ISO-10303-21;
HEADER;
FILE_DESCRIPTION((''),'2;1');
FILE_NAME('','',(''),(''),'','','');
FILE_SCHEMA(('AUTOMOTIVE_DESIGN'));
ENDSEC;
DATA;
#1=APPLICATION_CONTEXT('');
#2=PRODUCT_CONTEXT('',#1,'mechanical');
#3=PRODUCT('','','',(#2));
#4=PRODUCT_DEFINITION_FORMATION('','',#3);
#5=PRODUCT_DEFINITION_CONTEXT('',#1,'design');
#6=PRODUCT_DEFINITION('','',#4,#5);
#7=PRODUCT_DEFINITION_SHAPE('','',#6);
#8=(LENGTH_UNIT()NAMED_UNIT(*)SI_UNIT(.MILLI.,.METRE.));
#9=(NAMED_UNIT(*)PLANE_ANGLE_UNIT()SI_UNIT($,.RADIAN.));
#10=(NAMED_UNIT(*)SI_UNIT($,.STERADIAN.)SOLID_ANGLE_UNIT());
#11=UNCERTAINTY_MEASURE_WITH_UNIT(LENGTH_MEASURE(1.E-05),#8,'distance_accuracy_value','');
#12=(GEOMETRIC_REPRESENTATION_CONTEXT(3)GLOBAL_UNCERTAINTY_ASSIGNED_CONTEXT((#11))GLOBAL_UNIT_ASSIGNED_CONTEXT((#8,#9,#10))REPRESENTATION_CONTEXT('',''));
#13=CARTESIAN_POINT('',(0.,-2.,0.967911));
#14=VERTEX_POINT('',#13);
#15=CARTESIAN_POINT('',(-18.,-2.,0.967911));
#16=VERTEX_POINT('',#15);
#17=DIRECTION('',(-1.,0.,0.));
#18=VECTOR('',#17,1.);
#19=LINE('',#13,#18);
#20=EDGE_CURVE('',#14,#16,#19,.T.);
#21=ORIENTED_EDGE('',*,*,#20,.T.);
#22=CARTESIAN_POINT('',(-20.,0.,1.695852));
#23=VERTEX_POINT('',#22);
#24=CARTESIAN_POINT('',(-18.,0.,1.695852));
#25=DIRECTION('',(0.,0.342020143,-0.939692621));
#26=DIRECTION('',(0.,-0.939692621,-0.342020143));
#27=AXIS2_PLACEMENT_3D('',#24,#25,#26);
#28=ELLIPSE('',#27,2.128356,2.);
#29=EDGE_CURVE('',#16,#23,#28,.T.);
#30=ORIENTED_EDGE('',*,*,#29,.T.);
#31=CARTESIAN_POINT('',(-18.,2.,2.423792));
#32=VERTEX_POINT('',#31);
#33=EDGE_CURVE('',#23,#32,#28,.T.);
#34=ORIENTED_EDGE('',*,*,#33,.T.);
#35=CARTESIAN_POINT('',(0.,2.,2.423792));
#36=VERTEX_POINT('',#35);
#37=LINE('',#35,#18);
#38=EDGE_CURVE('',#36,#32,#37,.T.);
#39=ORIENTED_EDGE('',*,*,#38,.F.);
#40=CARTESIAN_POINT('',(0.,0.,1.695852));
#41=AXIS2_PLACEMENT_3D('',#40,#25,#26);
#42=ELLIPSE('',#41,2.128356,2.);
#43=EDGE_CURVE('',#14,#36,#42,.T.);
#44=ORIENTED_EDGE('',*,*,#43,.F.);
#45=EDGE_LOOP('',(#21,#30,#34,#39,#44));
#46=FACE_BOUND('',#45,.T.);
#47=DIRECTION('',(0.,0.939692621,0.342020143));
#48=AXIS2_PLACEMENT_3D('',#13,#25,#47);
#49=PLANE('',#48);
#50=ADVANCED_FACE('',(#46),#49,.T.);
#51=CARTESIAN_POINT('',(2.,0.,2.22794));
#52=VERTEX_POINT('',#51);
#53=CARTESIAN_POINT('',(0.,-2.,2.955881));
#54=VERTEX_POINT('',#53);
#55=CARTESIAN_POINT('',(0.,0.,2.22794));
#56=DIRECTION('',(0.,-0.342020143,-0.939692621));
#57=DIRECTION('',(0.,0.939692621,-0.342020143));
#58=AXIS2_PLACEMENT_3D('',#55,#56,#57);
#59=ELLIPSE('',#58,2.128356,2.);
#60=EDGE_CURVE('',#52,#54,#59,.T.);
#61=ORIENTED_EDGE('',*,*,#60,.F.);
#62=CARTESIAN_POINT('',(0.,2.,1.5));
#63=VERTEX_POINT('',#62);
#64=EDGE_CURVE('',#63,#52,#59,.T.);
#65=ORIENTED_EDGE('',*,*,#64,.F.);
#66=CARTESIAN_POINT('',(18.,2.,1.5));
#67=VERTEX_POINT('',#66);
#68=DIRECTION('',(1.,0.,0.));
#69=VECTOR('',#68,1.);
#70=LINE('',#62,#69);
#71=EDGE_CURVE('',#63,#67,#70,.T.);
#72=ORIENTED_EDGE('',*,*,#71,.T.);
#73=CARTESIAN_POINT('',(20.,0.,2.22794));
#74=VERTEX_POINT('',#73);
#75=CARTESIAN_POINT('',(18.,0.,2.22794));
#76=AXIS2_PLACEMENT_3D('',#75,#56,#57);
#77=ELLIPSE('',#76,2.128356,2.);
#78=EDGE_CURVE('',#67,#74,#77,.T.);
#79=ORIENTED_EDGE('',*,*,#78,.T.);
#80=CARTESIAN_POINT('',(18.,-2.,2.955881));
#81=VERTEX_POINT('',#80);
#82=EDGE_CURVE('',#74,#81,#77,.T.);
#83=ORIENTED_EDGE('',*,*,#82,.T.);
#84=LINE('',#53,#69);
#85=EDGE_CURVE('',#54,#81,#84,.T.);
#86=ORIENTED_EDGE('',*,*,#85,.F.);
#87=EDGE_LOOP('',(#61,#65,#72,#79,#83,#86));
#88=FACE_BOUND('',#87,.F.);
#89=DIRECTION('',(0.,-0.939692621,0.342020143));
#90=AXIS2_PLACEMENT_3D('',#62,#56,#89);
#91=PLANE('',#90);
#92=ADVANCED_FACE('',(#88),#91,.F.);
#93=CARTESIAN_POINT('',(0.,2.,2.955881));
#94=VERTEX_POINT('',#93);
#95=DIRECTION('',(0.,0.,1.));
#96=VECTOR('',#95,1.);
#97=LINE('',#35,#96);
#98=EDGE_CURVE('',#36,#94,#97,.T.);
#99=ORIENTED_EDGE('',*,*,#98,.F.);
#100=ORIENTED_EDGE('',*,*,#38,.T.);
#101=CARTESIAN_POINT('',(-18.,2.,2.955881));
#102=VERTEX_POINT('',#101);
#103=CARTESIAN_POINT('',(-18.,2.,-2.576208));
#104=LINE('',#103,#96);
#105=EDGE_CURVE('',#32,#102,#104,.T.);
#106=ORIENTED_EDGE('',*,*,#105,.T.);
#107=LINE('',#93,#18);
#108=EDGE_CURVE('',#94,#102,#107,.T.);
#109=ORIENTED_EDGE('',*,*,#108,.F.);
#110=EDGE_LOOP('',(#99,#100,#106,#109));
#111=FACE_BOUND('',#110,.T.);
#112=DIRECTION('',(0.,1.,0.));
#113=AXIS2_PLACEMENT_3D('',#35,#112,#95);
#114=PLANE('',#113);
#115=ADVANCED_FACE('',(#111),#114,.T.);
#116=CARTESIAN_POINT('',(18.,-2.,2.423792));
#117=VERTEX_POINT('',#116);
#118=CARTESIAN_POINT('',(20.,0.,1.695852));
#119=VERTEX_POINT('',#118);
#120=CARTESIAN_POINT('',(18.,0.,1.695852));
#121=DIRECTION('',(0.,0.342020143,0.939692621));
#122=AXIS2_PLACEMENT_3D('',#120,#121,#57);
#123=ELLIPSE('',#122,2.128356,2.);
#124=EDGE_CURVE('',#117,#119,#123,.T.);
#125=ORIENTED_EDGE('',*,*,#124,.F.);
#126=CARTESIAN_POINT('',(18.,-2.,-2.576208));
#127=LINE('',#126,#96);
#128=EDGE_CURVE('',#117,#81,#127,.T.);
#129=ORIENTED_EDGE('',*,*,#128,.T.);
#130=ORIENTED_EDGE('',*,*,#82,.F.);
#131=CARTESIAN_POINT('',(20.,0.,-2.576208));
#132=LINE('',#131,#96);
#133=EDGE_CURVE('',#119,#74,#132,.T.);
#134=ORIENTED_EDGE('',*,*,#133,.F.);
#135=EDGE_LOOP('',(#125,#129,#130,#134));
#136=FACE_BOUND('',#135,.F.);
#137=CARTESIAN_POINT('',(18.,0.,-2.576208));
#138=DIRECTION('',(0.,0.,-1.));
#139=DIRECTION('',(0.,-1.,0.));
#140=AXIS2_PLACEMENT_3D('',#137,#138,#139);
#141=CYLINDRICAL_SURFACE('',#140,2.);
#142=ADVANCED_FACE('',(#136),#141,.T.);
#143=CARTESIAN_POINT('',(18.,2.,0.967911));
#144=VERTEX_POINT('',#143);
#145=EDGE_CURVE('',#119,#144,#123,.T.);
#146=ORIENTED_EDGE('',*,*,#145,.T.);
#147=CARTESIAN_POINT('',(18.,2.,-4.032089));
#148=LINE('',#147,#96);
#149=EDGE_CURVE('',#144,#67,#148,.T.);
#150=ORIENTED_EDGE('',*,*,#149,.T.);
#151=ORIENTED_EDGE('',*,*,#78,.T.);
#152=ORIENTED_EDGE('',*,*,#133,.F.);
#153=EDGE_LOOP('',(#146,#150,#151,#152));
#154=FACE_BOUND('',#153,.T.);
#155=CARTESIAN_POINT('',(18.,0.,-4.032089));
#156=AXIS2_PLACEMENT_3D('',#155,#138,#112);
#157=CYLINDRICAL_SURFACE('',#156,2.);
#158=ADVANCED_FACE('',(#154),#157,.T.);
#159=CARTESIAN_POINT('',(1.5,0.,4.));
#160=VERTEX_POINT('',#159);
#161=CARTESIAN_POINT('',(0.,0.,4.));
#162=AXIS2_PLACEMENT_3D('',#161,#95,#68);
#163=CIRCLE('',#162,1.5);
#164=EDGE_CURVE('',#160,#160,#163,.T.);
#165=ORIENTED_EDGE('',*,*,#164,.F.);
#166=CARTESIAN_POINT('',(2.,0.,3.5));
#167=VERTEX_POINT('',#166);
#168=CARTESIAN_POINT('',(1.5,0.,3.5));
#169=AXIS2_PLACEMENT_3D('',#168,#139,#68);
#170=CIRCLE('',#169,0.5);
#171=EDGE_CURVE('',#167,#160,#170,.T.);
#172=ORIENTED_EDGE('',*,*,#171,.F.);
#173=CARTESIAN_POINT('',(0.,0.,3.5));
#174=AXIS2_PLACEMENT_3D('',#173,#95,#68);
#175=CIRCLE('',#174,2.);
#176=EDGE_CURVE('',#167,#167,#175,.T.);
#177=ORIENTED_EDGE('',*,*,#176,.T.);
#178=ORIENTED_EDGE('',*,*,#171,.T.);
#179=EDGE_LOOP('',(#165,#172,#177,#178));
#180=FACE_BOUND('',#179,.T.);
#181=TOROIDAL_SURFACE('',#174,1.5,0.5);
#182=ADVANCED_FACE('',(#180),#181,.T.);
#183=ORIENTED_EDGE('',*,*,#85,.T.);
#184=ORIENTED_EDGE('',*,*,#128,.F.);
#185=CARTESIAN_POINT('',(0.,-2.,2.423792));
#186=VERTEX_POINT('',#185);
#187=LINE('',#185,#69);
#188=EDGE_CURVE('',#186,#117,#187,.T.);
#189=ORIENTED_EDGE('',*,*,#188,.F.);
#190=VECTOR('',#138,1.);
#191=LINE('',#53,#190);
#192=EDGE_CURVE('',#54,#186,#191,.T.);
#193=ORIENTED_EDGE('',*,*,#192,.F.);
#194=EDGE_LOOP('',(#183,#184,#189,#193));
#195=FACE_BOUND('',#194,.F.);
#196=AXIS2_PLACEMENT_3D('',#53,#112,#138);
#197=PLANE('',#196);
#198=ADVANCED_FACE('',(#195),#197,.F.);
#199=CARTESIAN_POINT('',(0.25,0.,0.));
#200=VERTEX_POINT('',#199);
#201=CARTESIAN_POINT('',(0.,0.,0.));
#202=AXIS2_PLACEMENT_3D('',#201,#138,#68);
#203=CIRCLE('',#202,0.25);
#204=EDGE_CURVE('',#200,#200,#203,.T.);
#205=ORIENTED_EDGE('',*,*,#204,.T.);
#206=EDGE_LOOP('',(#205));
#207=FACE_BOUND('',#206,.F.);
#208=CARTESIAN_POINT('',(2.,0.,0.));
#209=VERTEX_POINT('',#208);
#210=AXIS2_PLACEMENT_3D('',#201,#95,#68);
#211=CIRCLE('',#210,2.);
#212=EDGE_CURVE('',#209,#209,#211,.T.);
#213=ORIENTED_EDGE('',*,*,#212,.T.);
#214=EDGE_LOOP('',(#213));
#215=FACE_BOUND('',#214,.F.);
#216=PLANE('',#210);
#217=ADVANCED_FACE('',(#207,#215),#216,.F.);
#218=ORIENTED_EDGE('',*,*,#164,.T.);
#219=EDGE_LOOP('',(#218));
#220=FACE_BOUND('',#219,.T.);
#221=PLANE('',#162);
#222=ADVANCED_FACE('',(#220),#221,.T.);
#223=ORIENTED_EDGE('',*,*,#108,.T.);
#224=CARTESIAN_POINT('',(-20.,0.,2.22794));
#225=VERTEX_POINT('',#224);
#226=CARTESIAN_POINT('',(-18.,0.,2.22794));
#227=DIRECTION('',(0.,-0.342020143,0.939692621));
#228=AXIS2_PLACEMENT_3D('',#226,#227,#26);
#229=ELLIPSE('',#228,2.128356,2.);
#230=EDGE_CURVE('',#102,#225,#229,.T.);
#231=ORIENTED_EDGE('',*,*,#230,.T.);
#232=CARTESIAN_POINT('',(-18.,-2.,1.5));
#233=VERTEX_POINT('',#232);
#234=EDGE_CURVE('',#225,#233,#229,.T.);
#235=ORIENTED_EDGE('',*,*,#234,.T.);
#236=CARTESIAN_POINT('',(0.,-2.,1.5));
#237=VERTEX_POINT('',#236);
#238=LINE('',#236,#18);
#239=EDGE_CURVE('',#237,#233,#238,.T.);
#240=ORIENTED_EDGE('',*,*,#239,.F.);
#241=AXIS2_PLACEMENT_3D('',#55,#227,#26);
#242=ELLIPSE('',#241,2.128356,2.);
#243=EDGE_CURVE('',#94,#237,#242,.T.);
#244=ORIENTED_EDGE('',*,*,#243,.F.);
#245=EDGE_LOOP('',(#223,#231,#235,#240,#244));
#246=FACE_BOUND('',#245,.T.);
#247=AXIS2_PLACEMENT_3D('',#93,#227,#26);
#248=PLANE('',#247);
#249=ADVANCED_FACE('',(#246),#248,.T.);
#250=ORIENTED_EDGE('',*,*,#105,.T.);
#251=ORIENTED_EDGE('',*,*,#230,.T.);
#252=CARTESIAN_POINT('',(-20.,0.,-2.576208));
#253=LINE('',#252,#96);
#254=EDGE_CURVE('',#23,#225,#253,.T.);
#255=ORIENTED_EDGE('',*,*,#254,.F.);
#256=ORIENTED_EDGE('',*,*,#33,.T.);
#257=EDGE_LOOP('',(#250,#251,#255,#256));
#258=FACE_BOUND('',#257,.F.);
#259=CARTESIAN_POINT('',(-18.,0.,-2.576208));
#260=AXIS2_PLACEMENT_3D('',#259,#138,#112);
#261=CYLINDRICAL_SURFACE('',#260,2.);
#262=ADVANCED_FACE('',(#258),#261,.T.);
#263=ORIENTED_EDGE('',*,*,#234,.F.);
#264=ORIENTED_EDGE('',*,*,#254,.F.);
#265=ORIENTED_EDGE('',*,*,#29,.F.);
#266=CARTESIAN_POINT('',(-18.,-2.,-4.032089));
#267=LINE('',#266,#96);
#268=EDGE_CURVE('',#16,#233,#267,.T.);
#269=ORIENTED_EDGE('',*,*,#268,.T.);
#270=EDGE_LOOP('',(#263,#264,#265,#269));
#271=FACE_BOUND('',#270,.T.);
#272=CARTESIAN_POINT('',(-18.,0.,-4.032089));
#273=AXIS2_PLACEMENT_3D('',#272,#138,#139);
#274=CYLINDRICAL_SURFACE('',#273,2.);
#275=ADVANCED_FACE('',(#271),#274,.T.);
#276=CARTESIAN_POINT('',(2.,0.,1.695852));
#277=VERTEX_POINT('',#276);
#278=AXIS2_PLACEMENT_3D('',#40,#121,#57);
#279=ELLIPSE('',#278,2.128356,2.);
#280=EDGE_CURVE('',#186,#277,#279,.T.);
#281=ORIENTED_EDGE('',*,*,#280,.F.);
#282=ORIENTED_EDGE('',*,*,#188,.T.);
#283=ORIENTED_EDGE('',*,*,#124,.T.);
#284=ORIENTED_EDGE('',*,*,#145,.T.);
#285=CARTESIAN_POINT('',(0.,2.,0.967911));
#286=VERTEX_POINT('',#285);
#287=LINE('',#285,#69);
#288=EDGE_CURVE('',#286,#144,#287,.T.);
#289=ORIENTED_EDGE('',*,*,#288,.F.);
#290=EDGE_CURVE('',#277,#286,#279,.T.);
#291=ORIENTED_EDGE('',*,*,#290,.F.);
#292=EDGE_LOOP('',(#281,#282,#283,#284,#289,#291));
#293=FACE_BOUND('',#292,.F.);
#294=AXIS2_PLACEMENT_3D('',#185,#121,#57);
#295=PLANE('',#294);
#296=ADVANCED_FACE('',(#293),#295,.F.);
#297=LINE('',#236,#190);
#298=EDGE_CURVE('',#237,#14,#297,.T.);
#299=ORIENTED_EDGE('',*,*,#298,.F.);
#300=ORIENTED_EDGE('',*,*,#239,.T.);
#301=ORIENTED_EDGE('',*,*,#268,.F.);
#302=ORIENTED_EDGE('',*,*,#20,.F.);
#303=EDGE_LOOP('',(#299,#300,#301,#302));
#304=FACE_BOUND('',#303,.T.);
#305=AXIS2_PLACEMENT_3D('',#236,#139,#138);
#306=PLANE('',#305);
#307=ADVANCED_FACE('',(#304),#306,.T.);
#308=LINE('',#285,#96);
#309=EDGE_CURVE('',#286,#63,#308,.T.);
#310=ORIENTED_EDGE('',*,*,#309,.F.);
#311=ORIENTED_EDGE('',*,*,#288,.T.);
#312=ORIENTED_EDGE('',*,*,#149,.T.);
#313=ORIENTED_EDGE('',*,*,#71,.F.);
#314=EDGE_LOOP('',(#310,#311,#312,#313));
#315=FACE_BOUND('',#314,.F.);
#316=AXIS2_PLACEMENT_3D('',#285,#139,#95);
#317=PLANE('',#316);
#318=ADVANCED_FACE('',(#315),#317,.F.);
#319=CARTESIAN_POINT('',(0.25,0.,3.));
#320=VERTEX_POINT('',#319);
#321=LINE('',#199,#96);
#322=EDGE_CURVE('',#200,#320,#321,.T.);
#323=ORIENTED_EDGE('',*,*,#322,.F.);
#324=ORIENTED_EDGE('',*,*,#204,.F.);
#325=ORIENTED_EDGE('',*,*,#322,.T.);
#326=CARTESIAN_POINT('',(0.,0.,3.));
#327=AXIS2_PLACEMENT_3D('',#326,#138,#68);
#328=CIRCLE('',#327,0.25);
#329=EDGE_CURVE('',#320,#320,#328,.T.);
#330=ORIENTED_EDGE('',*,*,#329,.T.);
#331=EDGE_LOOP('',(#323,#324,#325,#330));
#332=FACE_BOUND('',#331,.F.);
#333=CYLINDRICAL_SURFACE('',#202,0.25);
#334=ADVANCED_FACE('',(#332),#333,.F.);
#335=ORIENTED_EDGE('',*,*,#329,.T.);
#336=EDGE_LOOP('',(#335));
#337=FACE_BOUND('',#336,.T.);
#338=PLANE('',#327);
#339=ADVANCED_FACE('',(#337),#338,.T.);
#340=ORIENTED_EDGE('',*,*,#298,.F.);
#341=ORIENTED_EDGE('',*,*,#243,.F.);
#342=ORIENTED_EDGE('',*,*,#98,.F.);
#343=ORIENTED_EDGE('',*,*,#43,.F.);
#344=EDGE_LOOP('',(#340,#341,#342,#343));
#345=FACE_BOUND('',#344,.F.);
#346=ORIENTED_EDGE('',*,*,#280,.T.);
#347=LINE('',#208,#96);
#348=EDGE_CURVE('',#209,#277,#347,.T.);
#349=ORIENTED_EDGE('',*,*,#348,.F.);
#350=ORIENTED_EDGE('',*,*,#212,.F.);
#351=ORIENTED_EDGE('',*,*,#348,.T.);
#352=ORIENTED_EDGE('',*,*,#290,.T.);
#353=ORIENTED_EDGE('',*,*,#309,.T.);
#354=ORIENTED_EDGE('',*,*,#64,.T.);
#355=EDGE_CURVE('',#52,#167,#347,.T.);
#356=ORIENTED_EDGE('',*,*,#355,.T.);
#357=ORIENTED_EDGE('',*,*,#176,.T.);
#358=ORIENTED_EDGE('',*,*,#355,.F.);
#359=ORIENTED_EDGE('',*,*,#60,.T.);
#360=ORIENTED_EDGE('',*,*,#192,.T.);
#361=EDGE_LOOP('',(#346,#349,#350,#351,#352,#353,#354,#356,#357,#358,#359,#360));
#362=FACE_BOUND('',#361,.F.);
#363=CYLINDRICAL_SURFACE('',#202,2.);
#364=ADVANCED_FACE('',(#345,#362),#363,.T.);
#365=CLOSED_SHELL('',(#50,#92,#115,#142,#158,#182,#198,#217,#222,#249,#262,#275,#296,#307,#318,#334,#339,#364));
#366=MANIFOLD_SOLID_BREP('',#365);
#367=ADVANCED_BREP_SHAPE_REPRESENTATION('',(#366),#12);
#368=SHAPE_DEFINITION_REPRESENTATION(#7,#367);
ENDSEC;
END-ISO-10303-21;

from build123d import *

# Parameters (mm, degrees)
F0_R        = 2
F1_DEPTH    = 4
F3_DEPTH    = 20
F5_DEPTH    = 20
F6_T1_DEPTH = 10.5320888862
F6_T3_DEPTH = 10.5320888862
F7_R        = 0.5
F8_R        = 0.25
F9_DEPTH    = 3


# Not quite as in the source:
# - a fillet or chamfer that OpenCascade refuses, or shapes differently, is made with other operations: its cross-section is extruded or revolved along the edge and cut away or added


with BuildPart() as f1:
    # F0 (on Top) → F1 (new body)
    with BuildSketch(Plane.XY):
        Circle(F0_R)
    extrude(amount=F1_DEPTH)

    # F2 (on Right) → F3 (join)
    with BuildSketch(Plane.YZ):
        Polygon((2, 1.5), (-2, 2.9558809371), (-2, 2.4237920508), (2, 0.9679111138), align=None)
    extrude(amount=F3_DEPTH)

    # F4 (on Right) → F5 (join)
    with BuildSketch(Plane.YZ):
        Polygon((2, 2.4237920508), (2, 2.9558809371), (-2, 1.5), (-2, 0.9679111138), align=None)
    extrude(amount=-F5_DEPTH)

    # F6: fillet of radius 2 on 4 edges, made by hand

    # F6_s2 → F6_t1 (cut)
    with BuildSketch(Plane.XY.offset(-2.5762079492)):
        with BuildLine():
            ThreePointArc((-18, 2), (-19.4142135624, 1.4142135624), (-20, 0))
            Line((-20, 0), (-20, 2))
            Line((-20, 2), (-18, 2))
        make_face()
        with BuildLine():
            ThreePointArc((18, -2), (19.4142135624, -1.4142135624), (20, 0))
            Line((20, 0), (20, -2))
            Line((20, -2), (18, -2))
        make_face()
    extrude(amount=F6_T1_DEPTH, mode=Mode.SUBTRACT)

    # F6_s4 → F6_t3 (cut)
    with BuildSketch(Plane.XY.offset(-4.0320888862)):
        with BuildLine():
            ThreePointArc((-18, -2), (-19.4142135624, -1.4142135624), (-20, 0))
            Line((-20, 0), (-20, -2))
            Line((-20, -2), (-18, -2))
        make_face()
        with BuildLine():
            ThreePointArc((18, 2), (19.4142135624, 1.4142135624), (20, 0))
            Line((20, 0), (20, 2))
            Line((20, 2), (18, 2))
        make_face()
    extrude(amount=F6_T3_DEPTH, mode=Mode.SUBTRACT)

    # F7
    f7_edges = [f1.edges().sort_by_distance(p)[0] for p in [
        (-2, 0, 4),
    ]]
    fillet(f7_edges, radius=F7_R)

    # F8 (on face) → F9 (cut)
    with BuildSketch(Plane(origin=(0, 0, 0), x_dir=(1, 0, 0), z_dir=(0, 0, -1))):
        Circle(F8_R)
    extrude(amount=-F9_DEPTH, mode=Mode.SUBTRACT)


solid = f1.part
